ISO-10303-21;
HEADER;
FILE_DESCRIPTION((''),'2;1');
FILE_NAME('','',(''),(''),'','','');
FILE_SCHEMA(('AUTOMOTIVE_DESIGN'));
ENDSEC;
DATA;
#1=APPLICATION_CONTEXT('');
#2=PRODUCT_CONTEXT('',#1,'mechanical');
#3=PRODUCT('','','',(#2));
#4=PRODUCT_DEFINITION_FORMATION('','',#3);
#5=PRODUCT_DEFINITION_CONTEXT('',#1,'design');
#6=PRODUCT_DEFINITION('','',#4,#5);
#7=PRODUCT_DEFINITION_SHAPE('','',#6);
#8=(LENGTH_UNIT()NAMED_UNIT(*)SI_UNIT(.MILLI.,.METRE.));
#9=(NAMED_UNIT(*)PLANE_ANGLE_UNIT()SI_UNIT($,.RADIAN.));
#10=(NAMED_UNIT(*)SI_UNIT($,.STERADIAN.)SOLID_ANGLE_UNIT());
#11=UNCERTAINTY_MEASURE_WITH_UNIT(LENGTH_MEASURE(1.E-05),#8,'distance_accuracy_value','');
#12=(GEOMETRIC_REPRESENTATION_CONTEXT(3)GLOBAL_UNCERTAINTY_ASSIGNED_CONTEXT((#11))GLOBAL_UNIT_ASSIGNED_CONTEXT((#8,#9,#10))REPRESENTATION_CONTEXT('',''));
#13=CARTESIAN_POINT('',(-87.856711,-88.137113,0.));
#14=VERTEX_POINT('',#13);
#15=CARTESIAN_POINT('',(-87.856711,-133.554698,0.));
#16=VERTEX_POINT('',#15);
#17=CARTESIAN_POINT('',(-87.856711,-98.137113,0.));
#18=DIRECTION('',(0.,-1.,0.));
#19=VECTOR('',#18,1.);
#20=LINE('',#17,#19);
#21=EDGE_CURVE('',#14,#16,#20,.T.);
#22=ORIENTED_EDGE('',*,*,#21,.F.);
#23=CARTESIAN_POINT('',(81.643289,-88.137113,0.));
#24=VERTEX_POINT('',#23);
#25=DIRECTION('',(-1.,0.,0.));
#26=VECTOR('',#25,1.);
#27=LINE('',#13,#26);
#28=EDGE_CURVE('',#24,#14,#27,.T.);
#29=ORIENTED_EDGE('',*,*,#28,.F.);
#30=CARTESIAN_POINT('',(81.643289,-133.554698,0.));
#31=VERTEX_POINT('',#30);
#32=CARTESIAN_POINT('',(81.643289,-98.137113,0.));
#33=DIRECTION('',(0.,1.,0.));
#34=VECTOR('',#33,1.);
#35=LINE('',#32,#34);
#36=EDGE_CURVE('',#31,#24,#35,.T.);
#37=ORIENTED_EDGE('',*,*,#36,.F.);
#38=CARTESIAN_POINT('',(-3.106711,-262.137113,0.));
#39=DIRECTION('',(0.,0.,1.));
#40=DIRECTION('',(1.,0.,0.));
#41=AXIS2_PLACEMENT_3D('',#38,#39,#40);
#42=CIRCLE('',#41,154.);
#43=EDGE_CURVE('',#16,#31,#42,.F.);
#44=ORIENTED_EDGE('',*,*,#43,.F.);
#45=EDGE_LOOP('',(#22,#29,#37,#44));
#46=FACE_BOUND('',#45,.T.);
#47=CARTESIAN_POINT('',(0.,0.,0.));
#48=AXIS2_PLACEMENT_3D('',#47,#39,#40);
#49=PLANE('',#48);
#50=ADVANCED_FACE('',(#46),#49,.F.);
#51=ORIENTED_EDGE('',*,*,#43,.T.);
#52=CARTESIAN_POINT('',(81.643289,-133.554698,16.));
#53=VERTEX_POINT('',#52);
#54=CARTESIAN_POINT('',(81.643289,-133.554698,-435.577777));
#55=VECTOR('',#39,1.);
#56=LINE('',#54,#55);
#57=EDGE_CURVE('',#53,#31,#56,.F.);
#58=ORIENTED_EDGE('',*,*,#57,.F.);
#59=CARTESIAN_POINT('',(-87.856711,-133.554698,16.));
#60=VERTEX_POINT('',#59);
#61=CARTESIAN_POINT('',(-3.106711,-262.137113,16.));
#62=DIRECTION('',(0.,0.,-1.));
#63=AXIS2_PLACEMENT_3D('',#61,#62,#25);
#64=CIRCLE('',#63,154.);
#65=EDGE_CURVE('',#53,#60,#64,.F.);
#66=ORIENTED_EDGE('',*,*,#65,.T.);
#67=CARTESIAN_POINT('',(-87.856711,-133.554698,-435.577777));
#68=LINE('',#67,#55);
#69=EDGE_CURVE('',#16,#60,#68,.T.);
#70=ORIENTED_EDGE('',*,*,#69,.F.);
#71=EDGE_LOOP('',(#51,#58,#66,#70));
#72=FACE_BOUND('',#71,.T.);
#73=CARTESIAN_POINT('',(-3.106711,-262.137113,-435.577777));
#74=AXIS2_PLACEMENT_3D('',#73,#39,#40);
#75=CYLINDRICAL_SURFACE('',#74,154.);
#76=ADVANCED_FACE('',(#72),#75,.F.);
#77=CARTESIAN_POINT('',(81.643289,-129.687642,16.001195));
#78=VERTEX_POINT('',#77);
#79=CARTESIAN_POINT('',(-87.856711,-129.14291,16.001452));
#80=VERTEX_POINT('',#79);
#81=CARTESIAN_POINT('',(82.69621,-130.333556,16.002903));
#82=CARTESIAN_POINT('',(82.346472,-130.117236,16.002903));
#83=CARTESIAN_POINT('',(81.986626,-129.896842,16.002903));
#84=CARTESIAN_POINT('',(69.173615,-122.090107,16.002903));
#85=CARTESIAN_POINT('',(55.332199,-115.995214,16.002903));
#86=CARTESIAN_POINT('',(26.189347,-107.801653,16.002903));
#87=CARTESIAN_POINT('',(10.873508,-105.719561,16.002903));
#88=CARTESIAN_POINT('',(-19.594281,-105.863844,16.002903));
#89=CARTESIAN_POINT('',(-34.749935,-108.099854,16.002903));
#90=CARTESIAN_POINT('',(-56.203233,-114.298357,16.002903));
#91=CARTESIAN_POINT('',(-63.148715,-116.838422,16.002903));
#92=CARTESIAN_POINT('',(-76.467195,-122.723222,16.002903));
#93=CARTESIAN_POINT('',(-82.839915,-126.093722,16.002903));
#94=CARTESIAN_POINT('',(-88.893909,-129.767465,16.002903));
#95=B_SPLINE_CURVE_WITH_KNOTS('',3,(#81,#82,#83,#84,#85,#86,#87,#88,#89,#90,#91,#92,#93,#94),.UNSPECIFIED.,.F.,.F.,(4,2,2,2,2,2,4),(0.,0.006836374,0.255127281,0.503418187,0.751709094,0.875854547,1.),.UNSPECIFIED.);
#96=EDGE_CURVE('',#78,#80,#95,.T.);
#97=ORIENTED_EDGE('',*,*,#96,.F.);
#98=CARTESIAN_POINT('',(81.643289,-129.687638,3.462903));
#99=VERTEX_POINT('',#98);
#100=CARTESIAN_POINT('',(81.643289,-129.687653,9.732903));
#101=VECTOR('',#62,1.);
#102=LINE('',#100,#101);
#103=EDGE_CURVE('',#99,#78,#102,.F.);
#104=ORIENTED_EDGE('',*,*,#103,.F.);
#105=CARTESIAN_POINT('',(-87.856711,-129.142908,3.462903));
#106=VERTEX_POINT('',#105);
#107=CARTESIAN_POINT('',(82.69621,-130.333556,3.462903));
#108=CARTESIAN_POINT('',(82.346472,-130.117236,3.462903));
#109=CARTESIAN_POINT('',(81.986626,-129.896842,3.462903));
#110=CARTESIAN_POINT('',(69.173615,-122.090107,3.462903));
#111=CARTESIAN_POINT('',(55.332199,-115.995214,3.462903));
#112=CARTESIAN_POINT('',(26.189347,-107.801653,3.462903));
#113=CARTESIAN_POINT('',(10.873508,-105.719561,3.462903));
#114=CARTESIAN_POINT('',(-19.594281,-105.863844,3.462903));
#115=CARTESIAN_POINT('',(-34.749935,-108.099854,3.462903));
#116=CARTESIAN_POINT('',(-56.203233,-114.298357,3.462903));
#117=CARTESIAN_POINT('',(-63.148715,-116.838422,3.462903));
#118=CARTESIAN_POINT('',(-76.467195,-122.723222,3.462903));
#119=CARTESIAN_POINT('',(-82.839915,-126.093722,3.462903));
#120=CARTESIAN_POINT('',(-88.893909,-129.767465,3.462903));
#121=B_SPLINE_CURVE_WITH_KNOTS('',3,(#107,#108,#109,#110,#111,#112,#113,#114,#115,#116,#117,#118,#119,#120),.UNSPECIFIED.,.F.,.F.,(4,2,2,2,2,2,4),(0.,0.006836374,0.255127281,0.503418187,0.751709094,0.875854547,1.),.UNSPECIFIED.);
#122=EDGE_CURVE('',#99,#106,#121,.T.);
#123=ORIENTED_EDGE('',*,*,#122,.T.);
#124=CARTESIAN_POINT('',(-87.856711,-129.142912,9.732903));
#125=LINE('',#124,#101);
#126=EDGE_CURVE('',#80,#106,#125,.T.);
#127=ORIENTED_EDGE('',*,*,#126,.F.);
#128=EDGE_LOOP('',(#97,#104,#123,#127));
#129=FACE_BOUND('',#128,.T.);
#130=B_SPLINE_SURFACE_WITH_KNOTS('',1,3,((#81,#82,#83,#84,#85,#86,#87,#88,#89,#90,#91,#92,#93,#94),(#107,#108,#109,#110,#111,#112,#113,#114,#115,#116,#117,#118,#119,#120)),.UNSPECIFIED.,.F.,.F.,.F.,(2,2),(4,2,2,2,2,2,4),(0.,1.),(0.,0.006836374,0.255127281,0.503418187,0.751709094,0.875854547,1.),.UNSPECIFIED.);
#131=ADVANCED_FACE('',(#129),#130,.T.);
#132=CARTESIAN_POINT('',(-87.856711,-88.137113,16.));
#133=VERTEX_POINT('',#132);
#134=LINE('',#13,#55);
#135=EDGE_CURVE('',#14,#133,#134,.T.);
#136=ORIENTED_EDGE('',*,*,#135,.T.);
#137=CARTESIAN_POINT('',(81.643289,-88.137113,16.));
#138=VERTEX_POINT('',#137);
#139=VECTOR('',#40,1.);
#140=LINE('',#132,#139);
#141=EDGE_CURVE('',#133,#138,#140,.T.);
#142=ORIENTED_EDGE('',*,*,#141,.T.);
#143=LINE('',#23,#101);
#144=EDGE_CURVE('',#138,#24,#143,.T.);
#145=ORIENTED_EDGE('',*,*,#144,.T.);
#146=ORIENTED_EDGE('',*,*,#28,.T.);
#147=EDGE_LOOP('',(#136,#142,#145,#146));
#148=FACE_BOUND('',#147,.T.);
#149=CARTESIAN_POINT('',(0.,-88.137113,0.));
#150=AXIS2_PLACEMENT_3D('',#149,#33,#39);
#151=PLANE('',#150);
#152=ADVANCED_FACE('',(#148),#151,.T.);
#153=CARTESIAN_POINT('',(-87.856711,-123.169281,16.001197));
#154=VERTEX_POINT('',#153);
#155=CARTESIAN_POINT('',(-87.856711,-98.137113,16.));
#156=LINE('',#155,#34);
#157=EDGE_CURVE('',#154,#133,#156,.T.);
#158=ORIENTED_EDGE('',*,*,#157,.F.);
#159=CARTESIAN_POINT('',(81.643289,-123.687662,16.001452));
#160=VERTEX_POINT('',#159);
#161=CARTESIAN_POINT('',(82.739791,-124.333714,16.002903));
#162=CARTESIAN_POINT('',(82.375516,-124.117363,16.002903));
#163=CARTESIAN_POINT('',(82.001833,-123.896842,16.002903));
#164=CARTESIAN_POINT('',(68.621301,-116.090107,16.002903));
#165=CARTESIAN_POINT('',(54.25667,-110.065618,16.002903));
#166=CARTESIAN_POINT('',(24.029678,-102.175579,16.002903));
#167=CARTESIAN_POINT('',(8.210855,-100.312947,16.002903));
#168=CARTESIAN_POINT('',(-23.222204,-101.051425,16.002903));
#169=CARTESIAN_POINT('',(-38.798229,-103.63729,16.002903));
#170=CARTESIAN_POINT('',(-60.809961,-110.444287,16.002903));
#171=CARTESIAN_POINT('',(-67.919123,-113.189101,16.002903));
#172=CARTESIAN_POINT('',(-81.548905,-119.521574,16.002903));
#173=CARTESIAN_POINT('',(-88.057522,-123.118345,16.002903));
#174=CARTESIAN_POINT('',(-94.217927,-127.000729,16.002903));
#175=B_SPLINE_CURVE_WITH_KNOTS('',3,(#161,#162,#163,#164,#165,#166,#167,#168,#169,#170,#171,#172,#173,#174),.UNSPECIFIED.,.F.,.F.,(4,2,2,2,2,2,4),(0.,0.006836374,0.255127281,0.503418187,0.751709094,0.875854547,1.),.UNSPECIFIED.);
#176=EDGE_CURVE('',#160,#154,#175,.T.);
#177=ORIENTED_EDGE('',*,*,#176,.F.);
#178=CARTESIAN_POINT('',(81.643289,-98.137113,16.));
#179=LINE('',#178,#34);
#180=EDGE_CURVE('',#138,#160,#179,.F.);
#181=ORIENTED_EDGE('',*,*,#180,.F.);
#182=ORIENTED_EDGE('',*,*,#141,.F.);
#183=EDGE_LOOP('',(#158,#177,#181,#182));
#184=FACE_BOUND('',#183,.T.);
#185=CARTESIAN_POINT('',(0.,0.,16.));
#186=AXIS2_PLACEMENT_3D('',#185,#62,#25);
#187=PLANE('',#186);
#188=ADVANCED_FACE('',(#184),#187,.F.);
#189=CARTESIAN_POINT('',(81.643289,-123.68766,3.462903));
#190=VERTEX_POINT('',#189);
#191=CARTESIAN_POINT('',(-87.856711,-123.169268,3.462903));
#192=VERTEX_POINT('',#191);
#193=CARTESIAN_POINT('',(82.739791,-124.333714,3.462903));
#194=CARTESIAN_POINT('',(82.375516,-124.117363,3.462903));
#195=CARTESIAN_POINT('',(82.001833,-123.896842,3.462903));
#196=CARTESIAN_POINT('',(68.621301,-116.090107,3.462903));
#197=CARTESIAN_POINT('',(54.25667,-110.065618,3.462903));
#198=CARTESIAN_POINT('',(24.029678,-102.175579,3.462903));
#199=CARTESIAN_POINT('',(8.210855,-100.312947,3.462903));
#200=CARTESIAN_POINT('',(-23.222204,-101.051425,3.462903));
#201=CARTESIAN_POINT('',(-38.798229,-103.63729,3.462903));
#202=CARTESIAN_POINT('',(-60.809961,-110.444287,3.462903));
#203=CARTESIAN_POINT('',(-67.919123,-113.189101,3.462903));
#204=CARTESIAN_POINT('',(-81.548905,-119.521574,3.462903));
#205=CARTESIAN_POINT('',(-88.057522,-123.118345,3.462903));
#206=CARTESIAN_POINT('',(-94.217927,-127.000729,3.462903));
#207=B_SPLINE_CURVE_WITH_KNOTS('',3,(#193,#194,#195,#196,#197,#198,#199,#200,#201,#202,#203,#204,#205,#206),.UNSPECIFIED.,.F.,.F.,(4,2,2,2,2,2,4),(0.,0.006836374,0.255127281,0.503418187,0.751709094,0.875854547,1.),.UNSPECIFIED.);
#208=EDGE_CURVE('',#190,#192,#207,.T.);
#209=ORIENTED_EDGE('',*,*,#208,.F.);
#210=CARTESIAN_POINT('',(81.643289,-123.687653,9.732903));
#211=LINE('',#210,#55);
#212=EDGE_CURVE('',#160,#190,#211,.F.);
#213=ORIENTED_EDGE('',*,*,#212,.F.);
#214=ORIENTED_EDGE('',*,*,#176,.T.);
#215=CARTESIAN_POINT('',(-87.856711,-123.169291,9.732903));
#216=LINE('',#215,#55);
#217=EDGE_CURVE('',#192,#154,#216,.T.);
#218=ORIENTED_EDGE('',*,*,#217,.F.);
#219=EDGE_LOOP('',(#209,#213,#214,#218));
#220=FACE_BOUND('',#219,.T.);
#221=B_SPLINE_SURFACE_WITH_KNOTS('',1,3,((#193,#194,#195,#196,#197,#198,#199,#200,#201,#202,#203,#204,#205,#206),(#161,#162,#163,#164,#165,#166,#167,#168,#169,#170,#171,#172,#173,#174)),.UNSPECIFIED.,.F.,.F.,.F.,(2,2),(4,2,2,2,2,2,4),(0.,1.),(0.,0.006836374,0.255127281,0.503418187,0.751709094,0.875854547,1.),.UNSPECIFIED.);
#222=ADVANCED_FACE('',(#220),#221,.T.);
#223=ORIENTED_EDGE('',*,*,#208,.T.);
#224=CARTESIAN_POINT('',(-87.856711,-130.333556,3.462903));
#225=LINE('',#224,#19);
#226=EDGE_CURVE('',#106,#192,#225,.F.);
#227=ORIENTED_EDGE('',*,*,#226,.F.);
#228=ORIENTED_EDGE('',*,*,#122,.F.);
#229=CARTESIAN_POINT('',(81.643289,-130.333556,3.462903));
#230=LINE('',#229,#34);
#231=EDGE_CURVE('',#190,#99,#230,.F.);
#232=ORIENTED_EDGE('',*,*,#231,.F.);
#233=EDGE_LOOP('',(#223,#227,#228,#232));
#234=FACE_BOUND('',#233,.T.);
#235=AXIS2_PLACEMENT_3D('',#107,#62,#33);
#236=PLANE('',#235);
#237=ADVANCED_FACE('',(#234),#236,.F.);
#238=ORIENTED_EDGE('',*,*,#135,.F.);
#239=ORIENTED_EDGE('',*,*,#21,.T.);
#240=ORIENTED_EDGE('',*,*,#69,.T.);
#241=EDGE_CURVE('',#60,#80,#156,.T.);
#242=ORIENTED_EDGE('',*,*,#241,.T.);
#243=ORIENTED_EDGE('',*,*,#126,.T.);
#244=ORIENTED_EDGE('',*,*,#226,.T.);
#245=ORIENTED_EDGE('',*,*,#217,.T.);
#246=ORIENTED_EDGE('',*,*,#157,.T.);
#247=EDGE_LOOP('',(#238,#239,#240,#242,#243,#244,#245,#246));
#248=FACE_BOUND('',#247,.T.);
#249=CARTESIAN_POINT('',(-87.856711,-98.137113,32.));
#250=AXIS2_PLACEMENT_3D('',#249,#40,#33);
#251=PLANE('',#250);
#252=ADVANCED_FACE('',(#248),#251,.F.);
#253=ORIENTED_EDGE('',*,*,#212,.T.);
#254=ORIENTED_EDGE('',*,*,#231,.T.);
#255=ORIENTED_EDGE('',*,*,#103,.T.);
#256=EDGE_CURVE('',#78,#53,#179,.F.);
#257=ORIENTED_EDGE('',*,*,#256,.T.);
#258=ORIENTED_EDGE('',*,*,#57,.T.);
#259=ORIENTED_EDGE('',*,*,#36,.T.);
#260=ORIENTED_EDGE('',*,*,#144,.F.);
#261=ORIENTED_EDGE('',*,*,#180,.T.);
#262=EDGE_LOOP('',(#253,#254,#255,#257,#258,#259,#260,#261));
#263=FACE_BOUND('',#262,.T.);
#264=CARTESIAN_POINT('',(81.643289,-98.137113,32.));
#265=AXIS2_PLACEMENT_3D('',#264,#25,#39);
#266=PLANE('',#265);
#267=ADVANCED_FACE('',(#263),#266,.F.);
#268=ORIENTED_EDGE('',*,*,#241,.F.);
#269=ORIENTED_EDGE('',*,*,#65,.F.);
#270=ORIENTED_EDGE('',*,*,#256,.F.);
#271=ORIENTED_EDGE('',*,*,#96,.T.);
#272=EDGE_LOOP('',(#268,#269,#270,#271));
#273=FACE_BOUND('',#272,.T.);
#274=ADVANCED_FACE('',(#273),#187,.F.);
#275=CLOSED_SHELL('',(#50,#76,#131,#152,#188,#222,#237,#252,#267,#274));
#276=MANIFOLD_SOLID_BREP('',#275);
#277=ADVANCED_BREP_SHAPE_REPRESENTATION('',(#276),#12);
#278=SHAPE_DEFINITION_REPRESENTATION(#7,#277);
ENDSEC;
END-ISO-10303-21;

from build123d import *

# Parameters (mm, degrees)
SKETCH1_W           = 169.5
SKETCH1_H           = 47.45
BOSS_EXTRUDE1_DEPTH = 32
SKETCH7_R           = 154
CUT_EXTRUDE5_DEPTH  = 32
SKETCH14_W          = 169.5
SKETCH14_H          = 16
BOSS_EXTRUDE2_DEPTH = 10


with BuildPart() as part:
    # Sketch1 → Boss-Extrude1 (new body)
    with BuildSketch(Plane.XY):
        with Locations((-3.10671108, -121.862113139)):
            Rectangle(SKETCH1_W, SKETCH1_H)
    extrude(amount=BOSS_EXTRUDE1_DEPTH)

    # Sketch7 → Cut-Extrude5 (cut)
    with BuildSketch(Plane.XY.offset(32)):
        with Locations((-3.10671108, -262.137113139)):
            Circle(SKETCH7_R)
    extrude(amount=-CUT_EXTRUDE5_DEPTH, mode=Mode.SUBTRACT)

    # Split2
    split(bisect_by=Plane(origin=(0, 0, 16), x_dir=(-1, 0, 0), z_dir=(0, 0, -1)), keep=Keep.TOP)

    # Cut-Sweep4: read off the stored shape, not the designer's step
    # Cut-Sweep4: loft between two sections, ruled curve by curve
    cut_sweep4_from = [
        Edge.make_bspline([(82.739791111, -124.333714197, 3.462903079), (82.375516408, -124.117363235, 3.462903079), (82.0018328, -123.896841508, 3.462903079), (68.621301032, -116.090106709, 3.462903079), (54.256669748, -110.065617594, 3.462903079), (24.029677947, -102.175579118, 3.462903079), (8.210854863, -100.312946687, 3.462903079), (-23.222204489, -101.051424681, 3.462903079), (-38.798228939, -103.637289837, 3.462903079), (-60.809960607, -110.444286671, 3.462903079), (-67.919122803, -113.18910099, 3.462903079), (-81.548905499, -119.521573676, 3.462903079), (-88.057522246, -123.118344791, 3.46290308), (-94.217927223, -127.000728785, 3.462903079)], [0, 0, 0, 0, 0.006836374, 0.006836374, 0.255127281, 0.255127281, 0.503418187, 0.503418187, 0.751709094, 0.751709094, 0.875854547, 0.875854547, 1, 1, 1, 1], 3),
        Edge.make_bspline([(82.696209972, -130.333555919, 3.462903079), (82.346471994, -130.117236359, 3.462903079), (81.986625524, -129.896841507, 3.462903079), (69.173615468, -122.090106764, 3.46290308), (55.332198525, -115.995213643, 3.462903079), (26.189346767, -107.801652521, 3.462903079), (10.873507842, -105.719561423, 3.462903079), (-19.594281231, -105.863843686, 3.462903079), (-34.749935159, -108.099853973, 3.462903079), (-56.203233344, -114.298356521, 3.462903079), (-63.148715446, -116.838422053, 3.462903079), (-76.467195094, -122.723221567, 3.462903079), (-82.839914651, -126.093721608, 3.462903079), (-88.893908679, -129.767464505, 3.462903079)], [0, 0, 0, 0, 0.006836374, 0.006836374, 0.255127281, 0.255127281, 0.503418187, 0.503418187, 0.751709094, 0.751709094, 0.875854547, 0.875854547, 1, 1, 1, 1], 3),
        Edge.make_line((-88.893908679, -129.767464505, 3.462903079), (-94.217927223, -127.000728785, 3.462903079)),
        Edge.make_line((82.696209972, -130.333555919, 3.462903079), (82.739791111, -124.333714197, 3.462903079)),
    ]
    cut_sweep4_to = [
        Edge.make_bspline([(82.739791111, -124.333714197, 16.002903079), (82.375516408, -124.117363235, 16.002903079), (82.0018328, -123.896841508, 16.002903079), (68.621301031, -116.090106708, 16.002903079), (54.256669748, -110.065617594, 16.002903079), (24.029677947, -102.175579118, 16.002903079), (8.210854863, -100.312946687, 16.002903079), (-23.222204489, -101.051424681, 16.002903079), (-38.798228939, -103.637289837, 16.00290308), (-60.809960607, -110.444286671, 16.002903079), (-67.919122803, -113.18910099, 16.002903079), (-81.548905499, -119.521573676, 16.002903079), (-88.057522246, -123.118344791, 16.002903079), (-94.217927223, -127.000728785, 16.002903079)], [0, 0, 0, 0, 0.006836374, 0.006836374, 0.255127281, 0.255127281, 0.503418187, 0.503418187, 0.751709094, 0.751709094, 0.875854547, 0.875854547, 1, 1, 1, 1], 3),
        Edge.make_bspline([(82.696209972, -130.333555919, 16.002903079), (82.346471994, -130.117236359, 16.002903079), (81.986625524, -129.896841507, 16.002903079), (69.173615467, -122.090106763, 16.00290308), (55.332198525, -115.995213643, 16.002903079), (26.189346767, -107.801652521, 16.002903079), (10.873507842, -105.719561423, 16.002903079), (-19.594281231, -105.863843686, 16.002903079), (-34.749935159, -108.099853973, 16.00290308), (-56.203233344, -114.298356521, 16.002903079), (-63.148715446, -116.838422053, 16.002903079), (-76.467195094, -122.723221567, 16.002903079), (-82.839914651, -126.093721608, 16.002903079), (-88.893908679, -129.767464505, 16.002903079)], [0, 0, 0, 0, 0.006836374, 0.006836374, 0.255127281, 0.255127281, 0.503418187, 0.503418187, 0.751709094, 0.751709094, 0.875854547, 0.875854547, 1, 1, 1, 1], 3),
        Edge.make_line((-88.893908679, -129.767464505, 16.002903079), (-94.217927223, -127.000728785, 16.002903079)),
        Edge.make_line((82.696209972, -130.333555919, 16.002903079), (82.739791111, -124.333714197, 16.002903079)),
    ]
    cut_sweep4 = Solid(Shell([*[Face.make_surface_from_curves(cut_sweep4_from[k], cut_sweep4_to[k]) for k in range(4)], Face(Wire(cut_sweep4_from)), Face(Wire(cut_sweep4_to))]))
    add(cut_sweep4, mode=Mode.SUBTRACT)

    # Sketch14 → Boss-Extrude2 (add)
    with BuildSketch(Plane(origin=(0, -98.137113139, 0), x_dir=(1, 0, 0), z_dir=(0, 1, 0))):
        with Locations((-3.10671108, -8)):
            Rectangle(SKETCH14_W, SKETCH14_H)
    extrude(amount=BOSS_EXTRUDE2_DEPTH)


solid = part.part
